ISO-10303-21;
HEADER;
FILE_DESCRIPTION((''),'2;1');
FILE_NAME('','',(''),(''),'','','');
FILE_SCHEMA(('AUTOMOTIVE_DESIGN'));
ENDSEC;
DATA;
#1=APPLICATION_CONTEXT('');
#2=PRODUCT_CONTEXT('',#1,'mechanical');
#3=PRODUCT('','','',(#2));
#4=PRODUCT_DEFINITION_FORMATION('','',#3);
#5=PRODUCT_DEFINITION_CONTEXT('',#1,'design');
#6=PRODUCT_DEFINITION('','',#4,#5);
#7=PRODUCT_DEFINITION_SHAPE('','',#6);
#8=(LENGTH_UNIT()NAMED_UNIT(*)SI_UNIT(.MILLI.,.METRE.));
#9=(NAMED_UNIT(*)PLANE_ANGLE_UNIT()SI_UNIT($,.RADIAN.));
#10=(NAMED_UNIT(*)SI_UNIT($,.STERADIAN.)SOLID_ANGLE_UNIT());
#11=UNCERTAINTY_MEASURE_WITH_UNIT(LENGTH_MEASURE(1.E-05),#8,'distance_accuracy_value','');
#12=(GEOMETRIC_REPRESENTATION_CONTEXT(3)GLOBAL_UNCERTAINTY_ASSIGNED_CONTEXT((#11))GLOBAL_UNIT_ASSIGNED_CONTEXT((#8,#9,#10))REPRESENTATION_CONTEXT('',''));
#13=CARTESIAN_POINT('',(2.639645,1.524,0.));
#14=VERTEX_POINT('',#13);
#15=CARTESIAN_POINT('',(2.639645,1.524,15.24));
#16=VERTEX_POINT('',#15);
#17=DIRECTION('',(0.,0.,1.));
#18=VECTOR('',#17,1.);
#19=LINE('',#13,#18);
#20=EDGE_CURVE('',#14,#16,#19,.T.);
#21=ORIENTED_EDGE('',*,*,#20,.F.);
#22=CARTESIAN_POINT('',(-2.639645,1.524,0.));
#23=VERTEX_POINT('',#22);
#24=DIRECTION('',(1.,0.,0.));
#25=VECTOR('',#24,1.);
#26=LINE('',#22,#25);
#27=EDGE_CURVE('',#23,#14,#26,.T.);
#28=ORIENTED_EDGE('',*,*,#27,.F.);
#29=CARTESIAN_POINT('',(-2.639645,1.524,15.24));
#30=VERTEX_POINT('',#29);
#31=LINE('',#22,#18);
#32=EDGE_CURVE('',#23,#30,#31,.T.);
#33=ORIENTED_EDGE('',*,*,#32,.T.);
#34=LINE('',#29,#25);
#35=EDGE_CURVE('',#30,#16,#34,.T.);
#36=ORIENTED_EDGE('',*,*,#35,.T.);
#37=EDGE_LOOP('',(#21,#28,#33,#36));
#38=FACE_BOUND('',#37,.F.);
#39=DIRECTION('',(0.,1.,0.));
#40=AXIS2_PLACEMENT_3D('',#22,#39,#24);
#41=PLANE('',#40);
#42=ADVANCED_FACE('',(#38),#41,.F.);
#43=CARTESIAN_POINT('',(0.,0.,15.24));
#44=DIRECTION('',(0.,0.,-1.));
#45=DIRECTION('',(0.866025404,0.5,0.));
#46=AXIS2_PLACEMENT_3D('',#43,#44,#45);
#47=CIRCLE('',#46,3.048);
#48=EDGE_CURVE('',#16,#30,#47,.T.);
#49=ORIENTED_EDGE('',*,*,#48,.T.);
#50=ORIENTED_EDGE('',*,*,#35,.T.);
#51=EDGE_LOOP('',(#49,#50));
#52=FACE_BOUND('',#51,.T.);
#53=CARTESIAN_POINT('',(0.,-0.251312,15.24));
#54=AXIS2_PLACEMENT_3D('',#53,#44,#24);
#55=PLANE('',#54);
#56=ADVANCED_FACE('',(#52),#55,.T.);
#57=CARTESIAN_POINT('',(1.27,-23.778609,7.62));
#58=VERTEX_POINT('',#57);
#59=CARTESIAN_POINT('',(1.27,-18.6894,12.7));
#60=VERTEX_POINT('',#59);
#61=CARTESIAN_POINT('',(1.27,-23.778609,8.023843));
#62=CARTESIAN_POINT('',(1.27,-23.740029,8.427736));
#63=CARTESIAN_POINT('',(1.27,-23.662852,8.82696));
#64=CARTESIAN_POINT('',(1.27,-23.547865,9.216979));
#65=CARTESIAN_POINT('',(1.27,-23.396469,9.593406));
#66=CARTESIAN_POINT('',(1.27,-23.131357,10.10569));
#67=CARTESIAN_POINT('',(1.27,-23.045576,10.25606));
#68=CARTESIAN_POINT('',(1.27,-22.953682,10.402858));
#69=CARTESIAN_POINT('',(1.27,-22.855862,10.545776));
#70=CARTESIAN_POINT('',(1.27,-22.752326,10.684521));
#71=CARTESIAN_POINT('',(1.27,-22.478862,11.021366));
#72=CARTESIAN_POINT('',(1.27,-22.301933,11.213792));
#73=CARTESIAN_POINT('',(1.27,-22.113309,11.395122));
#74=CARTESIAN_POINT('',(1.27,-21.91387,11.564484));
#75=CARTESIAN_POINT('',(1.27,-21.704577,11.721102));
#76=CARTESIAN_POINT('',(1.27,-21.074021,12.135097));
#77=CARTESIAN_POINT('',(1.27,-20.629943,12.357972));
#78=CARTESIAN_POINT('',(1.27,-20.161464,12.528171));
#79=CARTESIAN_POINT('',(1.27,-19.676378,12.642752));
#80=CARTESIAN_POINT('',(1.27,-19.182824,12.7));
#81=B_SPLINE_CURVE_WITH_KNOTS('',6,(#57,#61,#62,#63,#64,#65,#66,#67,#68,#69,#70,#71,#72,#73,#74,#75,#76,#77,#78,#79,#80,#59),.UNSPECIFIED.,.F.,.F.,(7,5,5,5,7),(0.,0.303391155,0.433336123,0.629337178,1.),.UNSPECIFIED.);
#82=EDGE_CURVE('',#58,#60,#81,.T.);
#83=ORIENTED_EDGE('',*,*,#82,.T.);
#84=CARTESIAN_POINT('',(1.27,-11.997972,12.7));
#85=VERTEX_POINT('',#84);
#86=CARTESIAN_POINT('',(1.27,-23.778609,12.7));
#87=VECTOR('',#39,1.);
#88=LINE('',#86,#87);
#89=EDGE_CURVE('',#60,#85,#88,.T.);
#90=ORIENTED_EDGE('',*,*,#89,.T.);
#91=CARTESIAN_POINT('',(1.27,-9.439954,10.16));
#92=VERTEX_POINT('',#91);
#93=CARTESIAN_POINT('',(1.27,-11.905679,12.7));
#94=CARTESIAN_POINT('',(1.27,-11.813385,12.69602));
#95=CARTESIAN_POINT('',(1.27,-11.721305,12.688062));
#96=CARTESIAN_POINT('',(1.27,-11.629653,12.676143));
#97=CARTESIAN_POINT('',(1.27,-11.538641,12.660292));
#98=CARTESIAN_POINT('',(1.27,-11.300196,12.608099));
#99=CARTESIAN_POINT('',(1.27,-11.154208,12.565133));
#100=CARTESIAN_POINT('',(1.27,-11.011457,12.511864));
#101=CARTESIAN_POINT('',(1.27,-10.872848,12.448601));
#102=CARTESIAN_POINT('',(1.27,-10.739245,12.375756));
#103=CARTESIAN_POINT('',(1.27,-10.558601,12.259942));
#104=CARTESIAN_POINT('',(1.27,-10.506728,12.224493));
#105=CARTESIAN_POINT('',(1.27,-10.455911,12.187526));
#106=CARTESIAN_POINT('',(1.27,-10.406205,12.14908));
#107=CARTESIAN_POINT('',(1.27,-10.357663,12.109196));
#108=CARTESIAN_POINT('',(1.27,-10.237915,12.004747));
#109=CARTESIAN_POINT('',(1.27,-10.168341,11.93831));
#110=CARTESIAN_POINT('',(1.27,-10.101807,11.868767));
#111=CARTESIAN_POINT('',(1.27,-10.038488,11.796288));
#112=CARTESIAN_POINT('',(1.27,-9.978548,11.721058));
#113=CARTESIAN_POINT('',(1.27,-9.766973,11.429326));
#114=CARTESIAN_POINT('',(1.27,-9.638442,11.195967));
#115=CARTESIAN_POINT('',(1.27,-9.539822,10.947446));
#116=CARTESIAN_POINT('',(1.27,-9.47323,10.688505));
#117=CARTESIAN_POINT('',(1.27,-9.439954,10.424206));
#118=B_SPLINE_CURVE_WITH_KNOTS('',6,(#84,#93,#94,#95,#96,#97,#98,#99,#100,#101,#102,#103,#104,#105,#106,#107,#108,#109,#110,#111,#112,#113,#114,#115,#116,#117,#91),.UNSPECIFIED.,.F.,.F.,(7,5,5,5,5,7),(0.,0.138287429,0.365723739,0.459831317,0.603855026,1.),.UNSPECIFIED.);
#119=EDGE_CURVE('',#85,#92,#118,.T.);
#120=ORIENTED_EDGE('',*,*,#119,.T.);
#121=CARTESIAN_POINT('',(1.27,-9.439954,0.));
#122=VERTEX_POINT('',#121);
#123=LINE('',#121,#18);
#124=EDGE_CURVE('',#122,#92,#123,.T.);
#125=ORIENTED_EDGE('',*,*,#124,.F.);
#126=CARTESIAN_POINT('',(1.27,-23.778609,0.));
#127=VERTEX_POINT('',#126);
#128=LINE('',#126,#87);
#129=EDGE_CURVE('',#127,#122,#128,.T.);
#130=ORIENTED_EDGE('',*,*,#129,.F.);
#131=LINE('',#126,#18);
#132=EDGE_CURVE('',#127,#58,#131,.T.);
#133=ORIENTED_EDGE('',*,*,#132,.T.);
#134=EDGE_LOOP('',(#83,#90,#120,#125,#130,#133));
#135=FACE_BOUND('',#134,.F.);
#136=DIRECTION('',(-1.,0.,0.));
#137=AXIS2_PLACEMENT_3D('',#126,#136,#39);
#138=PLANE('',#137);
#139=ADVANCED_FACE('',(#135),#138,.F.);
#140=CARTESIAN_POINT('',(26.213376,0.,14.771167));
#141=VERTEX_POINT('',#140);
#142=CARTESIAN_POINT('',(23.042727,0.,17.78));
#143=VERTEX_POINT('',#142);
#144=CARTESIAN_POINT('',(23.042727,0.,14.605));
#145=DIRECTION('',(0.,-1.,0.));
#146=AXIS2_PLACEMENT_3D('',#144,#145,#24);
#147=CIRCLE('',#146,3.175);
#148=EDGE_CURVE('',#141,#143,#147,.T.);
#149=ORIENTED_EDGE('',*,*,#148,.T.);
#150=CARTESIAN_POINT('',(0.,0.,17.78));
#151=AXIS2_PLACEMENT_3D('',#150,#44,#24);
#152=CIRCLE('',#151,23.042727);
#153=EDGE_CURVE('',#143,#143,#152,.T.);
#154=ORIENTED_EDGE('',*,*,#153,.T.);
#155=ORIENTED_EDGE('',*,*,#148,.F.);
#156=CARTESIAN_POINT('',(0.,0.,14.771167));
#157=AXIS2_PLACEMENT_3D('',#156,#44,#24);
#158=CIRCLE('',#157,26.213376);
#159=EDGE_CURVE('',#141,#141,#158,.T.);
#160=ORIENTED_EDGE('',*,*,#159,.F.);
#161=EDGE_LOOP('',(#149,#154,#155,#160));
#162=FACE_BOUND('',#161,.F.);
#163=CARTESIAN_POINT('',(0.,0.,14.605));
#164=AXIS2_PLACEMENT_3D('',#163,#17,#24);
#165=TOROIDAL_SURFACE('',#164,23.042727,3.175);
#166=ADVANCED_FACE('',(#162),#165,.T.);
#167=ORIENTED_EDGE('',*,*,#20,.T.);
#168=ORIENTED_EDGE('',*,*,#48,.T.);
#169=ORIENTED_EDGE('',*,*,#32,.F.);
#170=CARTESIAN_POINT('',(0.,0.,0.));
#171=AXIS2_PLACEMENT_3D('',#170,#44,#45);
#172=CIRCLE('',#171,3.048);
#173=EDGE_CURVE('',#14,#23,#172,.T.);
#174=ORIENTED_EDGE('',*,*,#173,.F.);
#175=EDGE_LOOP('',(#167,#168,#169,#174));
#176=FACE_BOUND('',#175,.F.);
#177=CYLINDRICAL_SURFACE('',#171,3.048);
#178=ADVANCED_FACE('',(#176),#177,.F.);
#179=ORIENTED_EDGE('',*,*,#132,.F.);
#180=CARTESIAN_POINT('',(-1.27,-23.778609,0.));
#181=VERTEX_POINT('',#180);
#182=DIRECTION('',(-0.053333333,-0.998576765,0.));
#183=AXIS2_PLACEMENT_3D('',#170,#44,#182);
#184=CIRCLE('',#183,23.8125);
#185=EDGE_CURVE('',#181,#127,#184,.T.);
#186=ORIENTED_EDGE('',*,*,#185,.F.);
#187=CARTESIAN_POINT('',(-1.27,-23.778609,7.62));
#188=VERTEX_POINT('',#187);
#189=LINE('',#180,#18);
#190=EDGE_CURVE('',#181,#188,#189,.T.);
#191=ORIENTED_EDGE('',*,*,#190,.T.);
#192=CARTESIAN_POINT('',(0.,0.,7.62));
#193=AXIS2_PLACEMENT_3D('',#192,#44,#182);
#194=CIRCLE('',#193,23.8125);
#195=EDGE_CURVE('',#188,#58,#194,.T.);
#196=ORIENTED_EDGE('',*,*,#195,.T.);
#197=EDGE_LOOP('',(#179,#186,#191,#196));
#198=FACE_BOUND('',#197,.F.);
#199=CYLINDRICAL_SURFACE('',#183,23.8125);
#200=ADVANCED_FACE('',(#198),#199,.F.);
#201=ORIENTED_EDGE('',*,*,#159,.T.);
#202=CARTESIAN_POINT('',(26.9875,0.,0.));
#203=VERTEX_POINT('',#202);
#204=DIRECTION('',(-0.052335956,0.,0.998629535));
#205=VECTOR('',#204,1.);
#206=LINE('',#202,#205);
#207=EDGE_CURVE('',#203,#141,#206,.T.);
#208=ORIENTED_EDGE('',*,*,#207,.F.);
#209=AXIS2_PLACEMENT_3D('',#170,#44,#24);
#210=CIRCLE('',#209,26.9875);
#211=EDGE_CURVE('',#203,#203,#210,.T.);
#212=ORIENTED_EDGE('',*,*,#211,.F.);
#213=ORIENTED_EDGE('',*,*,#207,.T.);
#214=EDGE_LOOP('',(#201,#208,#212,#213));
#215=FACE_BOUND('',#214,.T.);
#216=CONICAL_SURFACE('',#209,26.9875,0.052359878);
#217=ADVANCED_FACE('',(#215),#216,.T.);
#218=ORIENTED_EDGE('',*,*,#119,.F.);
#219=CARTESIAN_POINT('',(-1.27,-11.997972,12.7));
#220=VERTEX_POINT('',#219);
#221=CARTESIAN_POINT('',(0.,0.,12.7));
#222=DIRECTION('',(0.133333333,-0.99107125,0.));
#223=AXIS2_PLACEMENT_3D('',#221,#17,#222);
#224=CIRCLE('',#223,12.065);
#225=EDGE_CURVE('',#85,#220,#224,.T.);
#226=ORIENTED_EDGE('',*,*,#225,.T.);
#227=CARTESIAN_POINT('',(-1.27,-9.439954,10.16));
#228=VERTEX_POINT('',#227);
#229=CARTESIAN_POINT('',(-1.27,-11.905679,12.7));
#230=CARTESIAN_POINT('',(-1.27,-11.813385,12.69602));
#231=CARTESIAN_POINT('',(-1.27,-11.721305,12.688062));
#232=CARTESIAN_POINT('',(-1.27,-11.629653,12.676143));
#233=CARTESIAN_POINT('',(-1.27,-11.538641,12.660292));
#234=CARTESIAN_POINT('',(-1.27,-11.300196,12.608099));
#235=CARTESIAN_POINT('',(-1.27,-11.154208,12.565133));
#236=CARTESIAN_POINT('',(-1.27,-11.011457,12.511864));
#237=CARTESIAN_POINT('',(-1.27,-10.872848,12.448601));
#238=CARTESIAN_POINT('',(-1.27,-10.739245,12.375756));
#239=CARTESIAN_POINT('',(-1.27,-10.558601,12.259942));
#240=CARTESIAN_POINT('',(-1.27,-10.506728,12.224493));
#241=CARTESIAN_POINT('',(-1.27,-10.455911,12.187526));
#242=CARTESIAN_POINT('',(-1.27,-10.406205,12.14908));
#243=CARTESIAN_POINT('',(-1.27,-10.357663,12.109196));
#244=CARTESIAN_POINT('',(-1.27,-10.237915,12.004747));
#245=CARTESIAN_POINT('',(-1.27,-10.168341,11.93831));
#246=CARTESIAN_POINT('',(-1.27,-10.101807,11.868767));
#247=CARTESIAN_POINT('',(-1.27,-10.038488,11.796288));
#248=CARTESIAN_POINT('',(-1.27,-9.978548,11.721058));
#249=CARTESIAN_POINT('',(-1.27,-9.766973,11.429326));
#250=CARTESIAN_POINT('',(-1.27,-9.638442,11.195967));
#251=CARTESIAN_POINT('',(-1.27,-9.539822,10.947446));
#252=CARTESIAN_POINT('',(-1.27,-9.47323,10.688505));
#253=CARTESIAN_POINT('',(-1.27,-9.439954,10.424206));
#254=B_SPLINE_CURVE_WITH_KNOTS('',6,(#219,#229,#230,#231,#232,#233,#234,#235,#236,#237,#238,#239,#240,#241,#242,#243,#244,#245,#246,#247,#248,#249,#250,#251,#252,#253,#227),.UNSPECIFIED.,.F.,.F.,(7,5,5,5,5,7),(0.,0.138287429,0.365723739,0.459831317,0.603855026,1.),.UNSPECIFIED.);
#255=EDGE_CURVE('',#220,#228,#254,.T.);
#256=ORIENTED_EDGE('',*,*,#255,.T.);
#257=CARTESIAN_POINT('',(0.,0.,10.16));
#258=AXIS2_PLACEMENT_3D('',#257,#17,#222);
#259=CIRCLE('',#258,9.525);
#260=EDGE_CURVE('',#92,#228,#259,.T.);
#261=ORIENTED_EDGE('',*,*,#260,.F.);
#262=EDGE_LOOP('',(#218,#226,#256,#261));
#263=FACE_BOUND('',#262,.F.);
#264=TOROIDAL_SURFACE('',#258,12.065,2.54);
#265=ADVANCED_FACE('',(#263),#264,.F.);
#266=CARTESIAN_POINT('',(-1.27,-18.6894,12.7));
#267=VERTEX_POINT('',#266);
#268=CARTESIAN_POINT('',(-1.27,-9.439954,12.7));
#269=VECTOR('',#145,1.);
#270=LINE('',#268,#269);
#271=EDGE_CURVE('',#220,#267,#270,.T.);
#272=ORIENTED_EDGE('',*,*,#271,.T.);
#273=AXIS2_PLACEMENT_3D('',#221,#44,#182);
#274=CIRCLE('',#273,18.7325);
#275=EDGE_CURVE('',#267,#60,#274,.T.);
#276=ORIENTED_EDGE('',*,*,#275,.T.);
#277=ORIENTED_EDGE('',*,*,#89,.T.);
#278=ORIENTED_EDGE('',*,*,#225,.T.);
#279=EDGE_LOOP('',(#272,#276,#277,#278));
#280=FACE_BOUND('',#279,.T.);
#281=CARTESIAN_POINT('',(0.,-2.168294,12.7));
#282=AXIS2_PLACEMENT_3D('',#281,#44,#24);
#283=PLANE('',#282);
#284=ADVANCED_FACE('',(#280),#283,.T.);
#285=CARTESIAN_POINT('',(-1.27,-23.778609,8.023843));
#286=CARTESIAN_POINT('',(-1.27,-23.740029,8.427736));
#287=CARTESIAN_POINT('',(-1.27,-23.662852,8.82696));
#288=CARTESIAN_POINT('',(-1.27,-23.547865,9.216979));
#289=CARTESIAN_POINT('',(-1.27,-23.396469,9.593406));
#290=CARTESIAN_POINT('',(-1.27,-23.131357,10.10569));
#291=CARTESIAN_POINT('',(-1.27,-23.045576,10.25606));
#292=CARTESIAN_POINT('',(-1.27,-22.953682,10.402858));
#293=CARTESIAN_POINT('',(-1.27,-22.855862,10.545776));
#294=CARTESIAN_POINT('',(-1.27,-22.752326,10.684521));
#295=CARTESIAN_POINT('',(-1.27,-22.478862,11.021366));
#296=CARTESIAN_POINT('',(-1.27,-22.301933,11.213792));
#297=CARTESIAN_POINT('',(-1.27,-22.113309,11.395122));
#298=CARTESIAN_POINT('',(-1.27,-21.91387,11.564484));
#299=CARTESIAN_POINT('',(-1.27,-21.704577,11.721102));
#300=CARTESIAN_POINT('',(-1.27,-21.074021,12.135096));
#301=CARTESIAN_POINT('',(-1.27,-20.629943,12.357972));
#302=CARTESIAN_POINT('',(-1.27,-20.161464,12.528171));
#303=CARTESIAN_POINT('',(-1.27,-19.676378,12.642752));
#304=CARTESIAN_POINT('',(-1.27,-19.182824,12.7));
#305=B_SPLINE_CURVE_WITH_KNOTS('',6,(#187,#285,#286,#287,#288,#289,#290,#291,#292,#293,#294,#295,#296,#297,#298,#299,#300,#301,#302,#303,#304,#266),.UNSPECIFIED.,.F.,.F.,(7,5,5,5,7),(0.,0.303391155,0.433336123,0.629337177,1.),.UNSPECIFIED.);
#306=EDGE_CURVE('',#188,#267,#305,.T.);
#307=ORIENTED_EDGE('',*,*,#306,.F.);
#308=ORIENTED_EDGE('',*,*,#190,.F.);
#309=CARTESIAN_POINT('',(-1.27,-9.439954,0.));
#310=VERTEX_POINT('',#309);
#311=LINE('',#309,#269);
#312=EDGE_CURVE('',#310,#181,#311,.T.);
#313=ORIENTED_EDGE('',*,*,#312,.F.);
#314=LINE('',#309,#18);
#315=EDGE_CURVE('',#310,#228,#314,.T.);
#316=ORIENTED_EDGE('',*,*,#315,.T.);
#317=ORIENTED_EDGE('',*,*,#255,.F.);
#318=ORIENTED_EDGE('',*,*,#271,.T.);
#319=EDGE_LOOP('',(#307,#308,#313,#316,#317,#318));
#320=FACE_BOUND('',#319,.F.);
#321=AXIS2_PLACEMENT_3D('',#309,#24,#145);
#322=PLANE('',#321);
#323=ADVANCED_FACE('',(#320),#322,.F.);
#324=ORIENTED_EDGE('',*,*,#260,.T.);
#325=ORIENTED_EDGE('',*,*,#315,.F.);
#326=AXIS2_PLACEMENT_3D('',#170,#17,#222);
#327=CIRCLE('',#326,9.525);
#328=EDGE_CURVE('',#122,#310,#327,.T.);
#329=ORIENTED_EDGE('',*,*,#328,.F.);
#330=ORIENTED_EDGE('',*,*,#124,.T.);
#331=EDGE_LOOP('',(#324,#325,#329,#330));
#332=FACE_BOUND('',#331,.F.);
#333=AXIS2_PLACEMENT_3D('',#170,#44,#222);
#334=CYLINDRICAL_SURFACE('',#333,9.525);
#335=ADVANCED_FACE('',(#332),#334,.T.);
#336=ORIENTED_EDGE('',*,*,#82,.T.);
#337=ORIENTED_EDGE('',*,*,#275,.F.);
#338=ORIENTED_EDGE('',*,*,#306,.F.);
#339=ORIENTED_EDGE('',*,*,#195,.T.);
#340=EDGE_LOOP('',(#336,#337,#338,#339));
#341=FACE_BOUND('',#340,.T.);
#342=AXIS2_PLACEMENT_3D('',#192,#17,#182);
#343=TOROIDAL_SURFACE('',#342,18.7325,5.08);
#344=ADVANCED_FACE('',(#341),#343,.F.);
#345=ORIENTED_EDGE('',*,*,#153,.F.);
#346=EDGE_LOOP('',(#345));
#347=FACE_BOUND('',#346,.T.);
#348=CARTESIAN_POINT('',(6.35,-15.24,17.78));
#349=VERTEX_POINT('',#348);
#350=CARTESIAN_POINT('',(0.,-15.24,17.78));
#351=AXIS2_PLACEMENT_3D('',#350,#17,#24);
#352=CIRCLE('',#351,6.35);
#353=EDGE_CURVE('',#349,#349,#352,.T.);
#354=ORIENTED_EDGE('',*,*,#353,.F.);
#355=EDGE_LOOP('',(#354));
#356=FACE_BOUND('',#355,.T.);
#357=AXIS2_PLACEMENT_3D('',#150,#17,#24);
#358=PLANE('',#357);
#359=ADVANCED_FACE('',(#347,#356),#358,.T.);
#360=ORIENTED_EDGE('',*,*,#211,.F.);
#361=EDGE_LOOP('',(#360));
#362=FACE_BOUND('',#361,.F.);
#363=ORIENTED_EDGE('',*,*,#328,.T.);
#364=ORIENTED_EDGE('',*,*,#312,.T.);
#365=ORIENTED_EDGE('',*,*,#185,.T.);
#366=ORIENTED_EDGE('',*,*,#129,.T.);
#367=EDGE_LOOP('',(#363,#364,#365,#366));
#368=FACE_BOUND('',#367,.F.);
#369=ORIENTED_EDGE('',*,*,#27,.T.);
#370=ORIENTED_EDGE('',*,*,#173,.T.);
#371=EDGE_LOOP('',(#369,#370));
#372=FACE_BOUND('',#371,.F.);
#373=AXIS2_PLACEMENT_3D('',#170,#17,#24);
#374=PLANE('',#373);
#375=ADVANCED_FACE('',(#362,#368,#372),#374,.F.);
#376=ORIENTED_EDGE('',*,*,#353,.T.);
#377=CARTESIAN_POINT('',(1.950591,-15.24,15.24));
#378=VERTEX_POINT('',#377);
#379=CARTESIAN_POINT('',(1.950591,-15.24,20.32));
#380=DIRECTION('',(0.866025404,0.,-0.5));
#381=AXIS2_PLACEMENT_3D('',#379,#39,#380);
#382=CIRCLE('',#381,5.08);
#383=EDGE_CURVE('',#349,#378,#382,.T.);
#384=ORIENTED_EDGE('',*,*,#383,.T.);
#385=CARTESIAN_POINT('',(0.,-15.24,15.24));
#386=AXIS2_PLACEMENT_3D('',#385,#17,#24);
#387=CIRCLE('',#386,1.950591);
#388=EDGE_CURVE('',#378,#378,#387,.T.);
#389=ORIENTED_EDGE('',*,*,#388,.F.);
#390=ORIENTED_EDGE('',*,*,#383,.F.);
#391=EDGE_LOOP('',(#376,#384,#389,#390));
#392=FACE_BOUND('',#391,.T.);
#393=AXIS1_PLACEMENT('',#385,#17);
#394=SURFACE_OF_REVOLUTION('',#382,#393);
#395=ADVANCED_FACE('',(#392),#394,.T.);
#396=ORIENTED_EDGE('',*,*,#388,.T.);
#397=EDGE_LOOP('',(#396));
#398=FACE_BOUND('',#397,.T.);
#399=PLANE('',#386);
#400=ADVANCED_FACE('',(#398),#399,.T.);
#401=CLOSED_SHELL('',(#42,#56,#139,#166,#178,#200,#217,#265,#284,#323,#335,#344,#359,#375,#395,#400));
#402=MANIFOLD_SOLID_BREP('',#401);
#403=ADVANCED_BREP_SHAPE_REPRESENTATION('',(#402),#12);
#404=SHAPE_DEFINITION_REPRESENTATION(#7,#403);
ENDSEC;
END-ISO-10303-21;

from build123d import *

# Parameters (mm, degrees)
F0_R      = 26.9875
F1_DEPTH  = 17.78
F1_TAPER  = 3
F2_R      = 3.175
F3_R      = 6.35
F4_DEPTH  = 2.54
F7_DEPTH  = 12.7
F8_R      = 5.08
F9_R      = 2.54
F11_DEPTH = 15.24


# Not quite as in the source:
# - a fillet or chamfer that OpenCascade refuses, or shapes differently, is made with other operations: its cross-section is extruded or revolved along the edge and cut away or added


with BuildPart() as f1:
    # F0 (on Top) → F1 (new body)
    with BuildSketch(Plane.XY):
        Circle(F0_R)
    extrude(amount=F1_DEPTH, taper=F1_TAPER)

    # F2
    f2_edges = [f1.edges().sort_by_distance(p)[0] for p in [
        (-26.05569, 0, 17.78),
    ]]
    fillet(f2_edges, radius=F2_R)

    # F3 (on face) → F4 (cut)
    with BuildSketch(Plane.XY.offset(17.78)):
        with Locations((0, -15.24)):
            Circle(F3_R)
    extrude(amount=-F4_DEPTH, mode=Mode.SUBTRACT)

    # F5: fillet of radius 5.08 on 1 edges, made by hand

    # F5_s1 → F5_t2 (revolve)
    with BuildSketch(Plane.XZ.offset(15.24)):
        with BuildLine():
            ThreePointArc((6.35, 17.78), (4.4905909488, 15.9205909488), (1.9505909488, 15.24))
            Line((1.9505909488, 15.24), (6.35, 15.24))
            Line((6.35, 15.24), (6.35, 17.78))
        make_face()
    revolve(axis=Axis((0, -15.24, 15.24), (0, 0, 1)))

    # F6 (on face) → F7 (cut)
    with BuildSketch(Plane(origin=(0, 0, 0), x_dir=(1, 0, 0), z_dir=(0, 0, -1))):
        with BuildLine():
            ThreePointArc((1.27, 9.4399536545), (0, -9.525), (-1.27, 9.4399536545))
            Line((-1.27, 9.4399536545), (-1.27, 23.7786092161))
            ThreePointArc((-1.27, 23.7786092161), (0, -23.8125), (1.27, 23.7786092161))
            Line((1.27, 23.7786092161), (1.27, 9.4399536545))
        make_face()
    extrude(amount=-F7_DEPTH, mode=Mode.SUBTRACT)

    # F8
    f8_edges = [f1.edges().sort_by_distance(p)[0] for p in [
        (0, 23.8125, 12.7),
    ]]
    fillet(f8_edges, radius=F8_R)

    # F9
    f9_edges = [f1.edges().sort_by_distance(p)[0] for p in [
        (0, 9.525, 12.7),
    ]]
    fillet(f9_edges, radius=F9_R)

    # F10 (on face) → F11 (cut)
    with BuildSketch(Plane(origin=(0, 0, 0), x_dir=(1, 0, 0), z_dir=(0, 0, -1))):
        with BuildLine():
            Line((-2.6396454307, -1.524), (2.6396454307, -1.524))
            ThreePointArc((2.6396454307, -1.524), (0, 3.048), (-2.6396454307, -1.524))
        make_face()
    extrude(amount=-F11_DEPTH, mode=Mode.SUBTRACT)


solid = f1.part
